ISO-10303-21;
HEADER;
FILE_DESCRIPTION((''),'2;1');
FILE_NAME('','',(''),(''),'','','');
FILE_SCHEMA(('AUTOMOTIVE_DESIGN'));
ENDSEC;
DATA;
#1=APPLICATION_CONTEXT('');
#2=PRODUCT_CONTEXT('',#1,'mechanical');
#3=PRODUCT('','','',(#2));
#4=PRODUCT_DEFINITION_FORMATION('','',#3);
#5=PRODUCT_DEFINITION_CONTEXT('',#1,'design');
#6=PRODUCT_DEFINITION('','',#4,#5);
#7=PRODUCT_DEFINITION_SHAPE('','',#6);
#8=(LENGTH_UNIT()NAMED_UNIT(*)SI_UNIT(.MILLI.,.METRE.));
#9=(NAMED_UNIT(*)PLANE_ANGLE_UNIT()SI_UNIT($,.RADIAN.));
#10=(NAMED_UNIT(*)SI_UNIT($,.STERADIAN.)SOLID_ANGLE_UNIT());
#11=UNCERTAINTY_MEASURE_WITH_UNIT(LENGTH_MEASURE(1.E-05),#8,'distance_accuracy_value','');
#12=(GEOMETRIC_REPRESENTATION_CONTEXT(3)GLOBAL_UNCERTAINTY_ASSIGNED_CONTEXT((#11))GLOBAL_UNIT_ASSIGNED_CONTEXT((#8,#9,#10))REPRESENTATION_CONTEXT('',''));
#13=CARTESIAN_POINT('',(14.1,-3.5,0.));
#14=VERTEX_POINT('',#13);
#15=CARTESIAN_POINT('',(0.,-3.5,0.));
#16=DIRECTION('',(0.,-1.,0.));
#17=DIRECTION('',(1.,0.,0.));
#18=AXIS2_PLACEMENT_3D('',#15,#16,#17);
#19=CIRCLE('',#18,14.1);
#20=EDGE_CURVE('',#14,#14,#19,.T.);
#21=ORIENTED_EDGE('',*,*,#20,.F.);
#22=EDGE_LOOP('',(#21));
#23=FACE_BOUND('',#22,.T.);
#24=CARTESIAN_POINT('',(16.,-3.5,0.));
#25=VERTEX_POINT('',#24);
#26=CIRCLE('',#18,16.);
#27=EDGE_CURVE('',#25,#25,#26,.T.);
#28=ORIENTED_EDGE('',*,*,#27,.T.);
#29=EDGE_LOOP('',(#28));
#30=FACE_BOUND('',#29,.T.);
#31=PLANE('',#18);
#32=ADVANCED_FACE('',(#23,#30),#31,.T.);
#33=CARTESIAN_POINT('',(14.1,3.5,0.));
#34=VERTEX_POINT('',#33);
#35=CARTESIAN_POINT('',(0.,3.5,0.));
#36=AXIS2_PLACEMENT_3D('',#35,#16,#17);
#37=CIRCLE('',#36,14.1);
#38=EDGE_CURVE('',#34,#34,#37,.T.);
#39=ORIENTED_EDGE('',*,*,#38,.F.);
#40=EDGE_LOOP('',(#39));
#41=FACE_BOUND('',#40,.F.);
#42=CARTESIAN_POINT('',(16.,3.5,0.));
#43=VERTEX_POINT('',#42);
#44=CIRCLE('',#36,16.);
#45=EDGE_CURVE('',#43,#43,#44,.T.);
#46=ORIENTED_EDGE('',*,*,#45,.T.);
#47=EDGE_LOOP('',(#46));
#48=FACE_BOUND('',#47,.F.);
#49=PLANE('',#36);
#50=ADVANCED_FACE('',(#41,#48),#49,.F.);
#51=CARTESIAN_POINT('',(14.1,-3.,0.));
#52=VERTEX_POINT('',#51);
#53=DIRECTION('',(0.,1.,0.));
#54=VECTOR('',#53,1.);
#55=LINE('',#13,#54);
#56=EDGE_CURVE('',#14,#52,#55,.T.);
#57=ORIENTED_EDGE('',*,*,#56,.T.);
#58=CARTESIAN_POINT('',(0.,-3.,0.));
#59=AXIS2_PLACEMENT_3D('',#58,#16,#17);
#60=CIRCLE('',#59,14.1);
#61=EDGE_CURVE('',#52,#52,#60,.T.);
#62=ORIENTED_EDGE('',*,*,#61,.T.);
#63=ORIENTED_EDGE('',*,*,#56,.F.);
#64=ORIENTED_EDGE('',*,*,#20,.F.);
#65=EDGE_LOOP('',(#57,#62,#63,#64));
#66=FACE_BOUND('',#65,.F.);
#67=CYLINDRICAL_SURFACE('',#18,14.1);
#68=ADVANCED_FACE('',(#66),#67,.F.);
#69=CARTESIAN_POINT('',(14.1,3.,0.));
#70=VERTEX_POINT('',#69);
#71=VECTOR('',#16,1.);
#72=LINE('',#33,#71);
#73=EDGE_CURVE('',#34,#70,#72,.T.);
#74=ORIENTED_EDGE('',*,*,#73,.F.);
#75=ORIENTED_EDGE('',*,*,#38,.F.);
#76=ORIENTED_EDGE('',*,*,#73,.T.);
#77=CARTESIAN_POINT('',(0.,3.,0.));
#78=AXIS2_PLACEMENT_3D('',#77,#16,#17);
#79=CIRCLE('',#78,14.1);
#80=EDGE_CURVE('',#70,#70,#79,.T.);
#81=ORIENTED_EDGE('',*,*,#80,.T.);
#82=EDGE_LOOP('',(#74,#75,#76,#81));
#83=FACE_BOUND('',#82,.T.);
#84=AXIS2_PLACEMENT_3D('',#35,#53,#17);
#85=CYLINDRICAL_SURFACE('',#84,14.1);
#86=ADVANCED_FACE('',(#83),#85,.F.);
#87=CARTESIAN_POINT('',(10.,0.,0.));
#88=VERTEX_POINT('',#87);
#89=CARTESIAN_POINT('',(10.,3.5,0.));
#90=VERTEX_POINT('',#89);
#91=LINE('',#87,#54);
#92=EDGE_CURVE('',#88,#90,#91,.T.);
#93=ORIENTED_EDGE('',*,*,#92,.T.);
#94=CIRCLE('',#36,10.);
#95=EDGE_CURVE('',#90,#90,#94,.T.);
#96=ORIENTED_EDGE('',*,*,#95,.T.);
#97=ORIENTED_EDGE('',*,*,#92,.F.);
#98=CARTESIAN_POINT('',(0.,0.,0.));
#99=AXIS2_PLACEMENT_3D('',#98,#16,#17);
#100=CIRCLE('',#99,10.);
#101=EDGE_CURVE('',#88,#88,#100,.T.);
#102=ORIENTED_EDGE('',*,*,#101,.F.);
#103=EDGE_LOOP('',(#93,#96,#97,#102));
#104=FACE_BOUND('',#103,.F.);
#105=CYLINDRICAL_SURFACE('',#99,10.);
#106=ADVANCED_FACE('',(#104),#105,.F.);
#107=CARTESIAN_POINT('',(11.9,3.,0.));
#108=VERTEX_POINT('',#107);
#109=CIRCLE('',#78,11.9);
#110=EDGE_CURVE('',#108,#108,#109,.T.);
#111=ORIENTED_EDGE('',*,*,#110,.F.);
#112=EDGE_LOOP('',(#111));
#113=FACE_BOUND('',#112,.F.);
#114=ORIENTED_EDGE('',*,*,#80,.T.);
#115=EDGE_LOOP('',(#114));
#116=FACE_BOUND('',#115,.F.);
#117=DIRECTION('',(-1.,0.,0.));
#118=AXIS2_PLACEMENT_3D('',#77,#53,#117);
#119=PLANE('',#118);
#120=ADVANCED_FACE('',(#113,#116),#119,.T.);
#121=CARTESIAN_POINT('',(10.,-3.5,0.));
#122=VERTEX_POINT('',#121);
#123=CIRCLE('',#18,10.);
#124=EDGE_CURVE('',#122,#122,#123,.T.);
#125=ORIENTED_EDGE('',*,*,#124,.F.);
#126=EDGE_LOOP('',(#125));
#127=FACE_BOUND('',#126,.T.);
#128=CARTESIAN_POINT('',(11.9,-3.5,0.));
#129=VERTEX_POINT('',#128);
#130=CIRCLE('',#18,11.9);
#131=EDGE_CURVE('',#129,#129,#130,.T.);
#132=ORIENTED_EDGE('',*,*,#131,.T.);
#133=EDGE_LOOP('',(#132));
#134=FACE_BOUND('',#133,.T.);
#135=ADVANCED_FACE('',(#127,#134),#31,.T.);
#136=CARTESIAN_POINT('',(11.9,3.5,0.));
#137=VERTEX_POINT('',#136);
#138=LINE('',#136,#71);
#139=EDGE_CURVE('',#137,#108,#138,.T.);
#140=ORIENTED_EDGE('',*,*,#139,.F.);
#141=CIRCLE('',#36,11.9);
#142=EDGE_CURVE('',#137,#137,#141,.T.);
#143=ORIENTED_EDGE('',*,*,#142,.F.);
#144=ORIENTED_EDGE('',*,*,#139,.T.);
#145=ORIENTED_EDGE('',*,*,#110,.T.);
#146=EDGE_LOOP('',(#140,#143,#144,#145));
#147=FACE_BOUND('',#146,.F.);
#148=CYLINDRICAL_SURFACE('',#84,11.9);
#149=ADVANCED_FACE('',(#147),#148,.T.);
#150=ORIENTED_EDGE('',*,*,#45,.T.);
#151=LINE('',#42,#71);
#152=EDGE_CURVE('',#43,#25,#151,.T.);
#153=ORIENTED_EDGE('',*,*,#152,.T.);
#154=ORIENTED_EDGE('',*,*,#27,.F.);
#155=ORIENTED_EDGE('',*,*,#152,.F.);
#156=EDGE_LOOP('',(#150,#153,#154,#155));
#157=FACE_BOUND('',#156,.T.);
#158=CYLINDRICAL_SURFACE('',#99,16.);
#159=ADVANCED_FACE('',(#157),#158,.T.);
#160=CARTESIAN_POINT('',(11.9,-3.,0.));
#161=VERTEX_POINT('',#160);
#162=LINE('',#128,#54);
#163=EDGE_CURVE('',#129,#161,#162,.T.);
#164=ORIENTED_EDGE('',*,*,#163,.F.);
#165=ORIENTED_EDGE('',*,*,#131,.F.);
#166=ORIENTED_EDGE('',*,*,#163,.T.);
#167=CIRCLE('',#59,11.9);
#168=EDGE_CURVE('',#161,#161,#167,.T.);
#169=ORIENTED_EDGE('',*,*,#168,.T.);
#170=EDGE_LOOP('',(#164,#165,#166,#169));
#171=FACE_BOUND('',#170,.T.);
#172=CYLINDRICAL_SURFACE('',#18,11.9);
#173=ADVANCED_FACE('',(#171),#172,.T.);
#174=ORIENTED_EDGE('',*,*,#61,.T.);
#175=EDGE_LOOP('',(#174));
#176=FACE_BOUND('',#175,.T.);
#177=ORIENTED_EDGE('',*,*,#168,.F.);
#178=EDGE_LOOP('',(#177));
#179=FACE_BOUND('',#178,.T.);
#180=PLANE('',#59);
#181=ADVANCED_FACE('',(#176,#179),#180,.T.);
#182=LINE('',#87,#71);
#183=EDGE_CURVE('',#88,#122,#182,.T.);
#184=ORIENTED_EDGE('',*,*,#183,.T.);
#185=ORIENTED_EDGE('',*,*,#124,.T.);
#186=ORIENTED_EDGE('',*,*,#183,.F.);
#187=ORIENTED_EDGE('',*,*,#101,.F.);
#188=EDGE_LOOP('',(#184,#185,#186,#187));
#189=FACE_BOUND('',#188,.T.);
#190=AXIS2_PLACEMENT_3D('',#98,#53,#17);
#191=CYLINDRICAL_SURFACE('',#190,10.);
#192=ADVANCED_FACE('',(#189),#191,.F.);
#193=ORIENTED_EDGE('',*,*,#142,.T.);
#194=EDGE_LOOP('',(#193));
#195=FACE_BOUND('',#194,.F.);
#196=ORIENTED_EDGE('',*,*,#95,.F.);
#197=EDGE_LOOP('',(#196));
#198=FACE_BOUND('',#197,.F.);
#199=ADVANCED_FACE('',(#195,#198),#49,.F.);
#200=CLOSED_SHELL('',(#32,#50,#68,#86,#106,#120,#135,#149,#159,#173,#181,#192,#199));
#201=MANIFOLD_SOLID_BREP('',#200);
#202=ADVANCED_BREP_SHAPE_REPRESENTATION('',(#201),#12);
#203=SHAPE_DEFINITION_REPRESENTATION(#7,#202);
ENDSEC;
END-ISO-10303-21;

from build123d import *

# Parameters (mm, degrees)
F0_R          = 16
F0_R_2        = 10
F1_DEPTH      = 3.5
F1_DEPTH_BACK = 3.5
F2_R          = 14.1
F2_R_2        = 11.9
F3_DEPTH      = 0.5


# Not quite as in the source:
# - a pattern or mirror of a feature is missing from the dataset's text; its kind, count and spacing are read off the source's solid


with BuildPart() as f1:
    # F0 (on Front) → F1 (new body, two sides)
    with BuildSketch(Plane.XZ) as f1_sk:
        Circle(F0_R)
        Circle(F0_R_2, mode=Mode.SUBTRACT)
    extrude(amount=F1_DEPTH)
    extrude(f1_sk.sketch, amount=-F1_DEPTH_BACK)

    # F2 (on face) → F3 (cut)
    with BuildSketch(Plane.XZ.offset(3.5)):
        Circle(F2_R)
        Circle(F2_R_2, mode=Mode.SUBTRACT)
    f3 = extrude(amount=-F3_DEPTH, mode=Mode.SUBTRACT)

    # F3_copies: F3 across plane
    add(f3.mirror(Plane.ZX), mode=Mode.SUBTRACT)


solid = f1.part
